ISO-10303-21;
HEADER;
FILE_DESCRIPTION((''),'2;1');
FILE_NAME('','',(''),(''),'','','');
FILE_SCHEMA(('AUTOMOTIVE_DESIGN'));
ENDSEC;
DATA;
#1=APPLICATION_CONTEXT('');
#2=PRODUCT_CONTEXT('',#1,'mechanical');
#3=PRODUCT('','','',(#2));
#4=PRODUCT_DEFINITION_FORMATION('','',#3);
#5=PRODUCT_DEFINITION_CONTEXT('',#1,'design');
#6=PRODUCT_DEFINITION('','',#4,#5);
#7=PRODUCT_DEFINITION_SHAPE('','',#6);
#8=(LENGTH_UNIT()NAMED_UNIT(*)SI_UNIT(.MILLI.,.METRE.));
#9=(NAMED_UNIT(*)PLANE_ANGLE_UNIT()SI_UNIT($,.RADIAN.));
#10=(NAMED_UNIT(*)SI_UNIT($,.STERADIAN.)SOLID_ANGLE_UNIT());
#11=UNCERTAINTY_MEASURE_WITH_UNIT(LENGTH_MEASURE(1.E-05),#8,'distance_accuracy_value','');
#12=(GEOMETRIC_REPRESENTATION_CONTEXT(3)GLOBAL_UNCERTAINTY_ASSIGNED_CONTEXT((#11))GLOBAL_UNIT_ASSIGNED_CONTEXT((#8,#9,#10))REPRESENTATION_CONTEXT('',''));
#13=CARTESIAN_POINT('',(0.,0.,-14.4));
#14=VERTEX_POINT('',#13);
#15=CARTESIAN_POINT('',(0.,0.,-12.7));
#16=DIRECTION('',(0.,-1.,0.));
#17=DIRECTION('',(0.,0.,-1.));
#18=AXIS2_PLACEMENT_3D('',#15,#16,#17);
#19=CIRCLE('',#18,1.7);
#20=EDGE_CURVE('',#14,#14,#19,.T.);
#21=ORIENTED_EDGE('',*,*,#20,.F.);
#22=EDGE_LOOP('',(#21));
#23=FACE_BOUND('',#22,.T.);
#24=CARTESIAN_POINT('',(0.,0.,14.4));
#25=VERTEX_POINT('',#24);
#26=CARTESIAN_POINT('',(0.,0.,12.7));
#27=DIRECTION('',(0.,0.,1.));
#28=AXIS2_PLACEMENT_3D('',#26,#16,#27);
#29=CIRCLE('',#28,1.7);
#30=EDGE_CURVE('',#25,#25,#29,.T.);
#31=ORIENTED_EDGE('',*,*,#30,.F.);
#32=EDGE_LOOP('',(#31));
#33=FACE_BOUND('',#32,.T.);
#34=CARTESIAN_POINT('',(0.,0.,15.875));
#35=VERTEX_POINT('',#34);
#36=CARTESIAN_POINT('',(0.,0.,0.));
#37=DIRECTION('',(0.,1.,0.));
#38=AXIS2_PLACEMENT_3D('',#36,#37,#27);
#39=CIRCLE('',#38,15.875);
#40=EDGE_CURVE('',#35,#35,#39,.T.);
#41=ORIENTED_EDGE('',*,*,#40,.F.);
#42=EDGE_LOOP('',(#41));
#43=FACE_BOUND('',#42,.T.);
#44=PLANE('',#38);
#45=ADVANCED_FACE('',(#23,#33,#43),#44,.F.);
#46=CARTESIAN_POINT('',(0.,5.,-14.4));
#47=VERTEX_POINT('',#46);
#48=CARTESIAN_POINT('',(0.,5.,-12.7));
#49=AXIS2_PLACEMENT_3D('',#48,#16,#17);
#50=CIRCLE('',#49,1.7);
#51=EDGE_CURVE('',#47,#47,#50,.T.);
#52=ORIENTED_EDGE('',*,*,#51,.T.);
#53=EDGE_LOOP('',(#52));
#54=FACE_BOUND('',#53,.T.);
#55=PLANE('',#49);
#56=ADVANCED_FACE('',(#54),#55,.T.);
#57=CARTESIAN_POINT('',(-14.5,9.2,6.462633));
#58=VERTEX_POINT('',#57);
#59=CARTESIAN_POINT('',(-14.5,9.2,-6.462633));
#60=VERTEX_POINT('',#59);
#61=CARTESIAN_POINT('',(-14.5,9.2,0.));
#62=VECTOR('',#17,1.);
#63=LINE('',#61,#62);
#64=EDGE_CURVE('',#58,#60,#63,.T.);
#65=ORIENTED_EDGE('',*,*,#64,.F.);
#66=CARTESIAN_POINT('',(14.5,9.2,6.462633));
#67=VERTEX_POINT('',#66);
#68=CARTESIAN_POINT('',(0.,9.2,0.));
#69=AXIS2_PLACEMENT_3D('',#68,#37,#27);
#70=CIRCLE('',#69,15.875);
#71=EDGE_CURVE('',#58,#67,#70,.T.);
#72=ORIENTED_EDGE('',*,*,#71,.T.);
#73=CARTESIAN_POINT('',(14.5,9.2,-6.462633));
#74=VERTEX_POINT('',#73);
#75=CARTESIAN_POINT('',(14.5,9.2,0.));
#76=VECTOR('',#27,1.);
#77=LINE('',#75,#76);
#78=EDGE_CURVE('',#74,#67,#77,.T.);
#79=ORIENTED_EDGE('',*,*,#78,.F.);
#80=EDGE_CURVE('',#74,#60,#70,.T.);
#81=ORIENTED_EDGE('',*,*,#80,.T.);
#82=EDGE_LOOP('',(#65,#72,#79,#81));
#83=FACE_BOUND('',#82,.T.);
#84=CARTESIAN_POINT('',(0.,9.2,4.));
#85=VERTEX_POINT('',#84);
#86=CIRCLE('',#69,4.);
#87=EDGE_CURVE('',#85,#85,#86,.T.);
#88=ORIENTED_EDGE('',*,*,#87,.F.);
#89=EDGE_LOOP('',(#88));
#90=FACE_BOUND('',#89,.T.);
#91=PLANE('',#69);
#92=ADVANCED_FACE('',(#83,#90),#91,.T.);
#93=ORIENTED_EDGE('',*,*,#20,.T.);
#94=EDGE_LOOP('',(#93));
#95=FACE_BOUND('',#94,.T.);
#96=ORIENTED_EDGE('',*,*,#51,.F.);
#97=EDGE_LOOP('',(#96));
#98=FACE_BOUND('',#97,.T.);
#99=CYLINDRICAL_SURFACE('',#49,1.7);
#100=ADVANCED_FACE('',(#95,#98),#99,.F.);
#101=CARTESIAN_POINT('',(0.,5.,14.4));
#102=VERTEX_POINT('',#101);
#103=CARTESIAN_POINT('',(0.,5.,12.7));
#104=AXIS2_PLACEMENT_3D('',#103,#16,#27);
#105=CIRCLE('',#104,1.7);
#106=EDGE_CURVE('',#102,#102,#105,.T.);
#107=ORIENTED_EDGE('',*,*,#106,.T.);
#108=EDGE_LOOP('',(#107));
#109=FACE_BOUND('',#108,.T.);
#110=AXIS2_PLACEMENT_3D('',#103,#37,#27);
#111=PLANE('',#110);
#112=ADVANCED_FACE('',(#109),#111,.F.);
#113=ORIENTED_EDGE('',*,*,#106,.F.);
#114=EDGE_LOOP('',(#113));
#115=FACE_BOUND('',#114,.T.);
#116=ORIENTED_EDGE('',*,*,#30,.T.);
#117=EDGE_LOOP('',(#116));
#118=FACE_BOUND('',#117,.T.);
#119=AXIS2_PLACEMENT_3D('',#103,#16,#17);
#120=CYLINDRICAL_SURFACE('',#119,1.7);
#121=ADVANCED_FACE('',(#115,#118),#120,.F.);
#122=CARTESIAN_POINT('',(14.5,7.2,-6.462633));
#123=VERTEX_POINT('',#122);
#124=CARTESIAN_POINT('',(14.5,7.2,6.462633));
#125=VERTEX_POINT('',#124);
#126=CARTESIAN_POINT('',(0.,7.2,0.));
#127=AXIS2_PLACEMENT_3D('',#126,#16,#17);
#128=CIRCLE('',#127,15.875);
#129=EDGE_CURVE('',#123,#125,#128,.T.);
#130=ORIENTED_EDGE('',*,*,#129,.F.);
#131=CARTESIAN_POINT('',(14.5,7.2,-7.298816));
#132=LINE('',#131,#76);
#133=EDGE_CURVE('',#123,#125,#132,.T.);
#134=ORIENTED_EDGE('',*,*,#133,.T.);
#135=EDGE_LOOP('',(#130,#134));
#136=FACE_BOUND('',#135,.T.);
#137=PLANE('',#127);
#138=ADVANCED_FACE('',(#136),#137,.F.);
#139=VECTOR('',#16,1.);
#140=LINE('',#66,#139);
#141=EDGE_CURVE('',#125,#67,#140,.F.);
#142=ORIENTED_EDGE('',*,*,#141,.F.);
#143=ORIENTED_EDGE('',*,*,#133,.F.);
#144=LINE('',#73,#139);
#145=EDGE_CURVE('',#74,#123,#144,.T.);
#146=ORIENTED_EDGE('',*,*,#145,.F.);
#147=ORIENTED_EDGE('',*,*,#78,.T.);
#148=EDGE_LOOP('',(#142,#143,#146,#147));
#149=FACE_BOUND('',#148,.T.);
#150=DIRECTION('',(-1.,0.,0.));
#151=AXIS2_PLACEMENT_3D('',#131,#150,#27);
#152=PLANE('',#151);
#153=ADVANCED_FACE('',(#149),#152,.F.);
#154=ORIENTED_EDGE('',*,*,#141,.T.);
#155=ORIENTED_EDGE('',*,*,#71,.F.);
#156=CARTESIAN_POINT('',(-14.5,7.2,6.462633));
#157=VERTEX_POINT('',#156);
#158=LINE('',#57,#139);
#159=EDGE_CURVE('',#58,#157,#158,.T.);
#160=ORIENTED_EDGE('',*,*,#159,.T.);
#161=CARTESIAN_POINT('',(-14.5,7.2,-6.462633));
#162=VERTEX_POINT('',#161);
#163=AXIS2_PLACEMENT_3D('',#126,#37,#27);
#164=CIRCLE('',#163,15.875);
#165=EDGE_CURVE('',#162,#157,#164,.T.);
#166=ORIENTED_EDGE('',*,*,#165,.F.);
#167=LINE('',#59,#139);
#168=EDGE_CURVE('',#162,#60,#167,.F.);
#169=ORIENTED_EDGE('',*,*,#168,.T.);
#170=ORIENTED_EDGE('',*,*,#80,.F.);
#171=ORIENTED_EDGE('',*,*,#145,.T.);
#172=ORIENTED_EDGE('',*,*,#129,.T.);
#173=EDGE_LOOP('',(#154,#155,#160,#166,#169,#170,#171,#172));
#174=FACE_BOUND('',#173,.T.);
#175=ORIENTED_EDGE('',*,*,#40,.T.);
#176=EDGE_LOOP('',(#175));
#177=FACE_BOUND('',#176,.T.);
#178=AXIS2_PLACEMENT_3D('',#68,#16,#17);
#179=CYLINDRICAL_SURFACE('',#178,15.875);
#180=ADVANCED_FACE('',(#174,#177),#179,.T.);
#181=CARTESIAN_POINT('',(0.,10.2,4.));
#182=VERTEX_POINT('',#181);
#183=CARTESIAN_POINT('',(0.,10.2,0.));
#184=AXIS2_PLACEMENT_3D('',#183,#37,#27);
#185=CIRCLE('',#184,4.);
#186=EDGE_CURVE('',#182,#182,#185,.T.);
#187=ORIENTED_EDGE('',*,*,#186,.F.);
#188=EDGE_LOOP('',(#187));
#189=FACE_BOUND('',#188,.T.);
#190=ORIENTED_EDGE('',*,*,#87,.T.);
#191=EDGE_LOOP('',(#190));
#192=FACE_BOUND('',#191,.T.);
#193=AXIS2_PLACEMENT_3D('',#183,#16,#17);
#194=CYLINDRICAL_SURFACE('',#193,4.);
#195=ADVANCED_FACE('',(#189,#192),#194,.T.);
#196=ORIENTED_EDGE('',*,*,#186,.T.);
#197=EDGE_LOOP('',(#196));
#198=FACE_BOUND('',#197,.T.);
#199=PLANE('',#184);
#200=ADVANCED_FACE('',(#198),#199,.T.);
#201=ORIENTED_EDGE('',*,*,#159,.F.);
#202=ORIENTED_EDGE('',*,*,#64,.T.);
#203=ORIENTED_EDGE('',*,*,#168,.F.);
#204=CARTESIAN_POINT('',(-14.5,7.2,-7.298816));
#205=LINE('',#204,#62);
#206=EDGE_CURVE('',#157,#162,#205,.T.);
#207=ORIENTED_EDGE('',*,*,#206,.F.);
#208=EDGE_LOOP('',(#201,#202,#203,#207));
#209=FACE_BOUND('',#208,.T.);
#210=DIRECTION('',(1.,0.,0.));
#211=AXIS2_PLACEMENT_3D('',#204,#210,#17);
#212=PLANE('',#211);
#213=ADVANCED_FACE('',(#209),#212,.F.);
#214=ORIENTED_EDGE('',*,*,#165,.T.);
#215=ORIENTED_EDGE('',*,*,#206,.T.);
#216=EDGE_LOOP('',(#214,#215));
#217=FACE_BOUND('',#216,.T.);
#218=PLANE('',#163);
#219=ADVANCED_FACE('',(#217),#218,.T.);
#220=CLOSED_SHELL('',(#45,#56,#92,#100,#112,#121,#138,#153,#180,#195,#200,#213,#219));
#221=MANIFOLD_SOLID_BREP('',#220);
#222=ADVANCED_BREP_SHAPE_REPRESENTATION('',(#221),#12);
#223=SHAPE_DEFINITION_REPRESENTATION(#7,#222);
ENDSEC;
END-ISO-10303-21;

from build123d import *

# Parameters (mm, degrees)
SKETCH1_R               = 15.875
BOSS_EXTRUDE1_DEPTH     = 9.2
SKETCH2_W               = 2.259426776
SKETCH2_H               = 16.292984729
SKETCH2_W_2             = 2.453909841
SKETCH2_H_2             = 18.61191006
CUT_EXTRUDE2_DEPTH      = 2
SKETCH3_R               = 4
BOSS_EXTRUDE3_DEPTH     = 1
BOSS_EXTRUDE4_START     = -5
BOSS_EXTRUDE4_OUTLINE_R = 1.7
BOSS_EXTRUDE4_DEPTH     = 5


# Read off the part's stored shape, not the designer's step: Boss-Extrude4
with BuildPart() as part:
    # Sketch1 → Boss-Extrude1 (new body)
    with BuildSketch(Plane(origin=(0, 0, 0), x_dir=(1, 0, 0), z_dir=(0, 1, 0))):
        with Locations(Location((0, 0, 0), (0, 0, 270))):
            Circle(SKETCH1_R)
    extrude(amount=BOSS_EXTRUDE1_DEPTH)

    # Sketch2 → Cut-Extrude2 (cut)
    with BuildSketch(Plane(origin=(0, 9.2, 0), x_dir=(1, 0, 0), z_dir=(0, 1, 0))):
        with Locations((-15.629713388, -0.847675915)):
            Rectangle(SKETCH2_W, SKETCH2_H)
        with Locations((15.726954921, -2.007138581)):
            Rectangle(SKETCH2_W_2, SKETCH2_H_2)
    extrude(amount=-CUT_EXTRUDE2_DEPTH, mode=Mode.SUBTRACT)

    # Sketch3 → Boss-Extrude3 (add)
    with BuildSketch(Plane(origin=(0, 9.2, 0), x_dir=(1, 0, 0), z_dir=(0, 1, 0))):
        with Locations(Location((0, 0, 0), (0, 0, 270))):
            Circle(SKETCH3_R)
    extrude(amount=BOSS_EXTRUDE3_DEPTH)

    # Boss-Extrude4 outline → Boss-Extrude4 (cut)
    with BuildSketch(Plane.XZ.offset(BOSS_EXTRUDE4_START)):
        with Locations((0, 12.7)):
            Circle(BOSS_EXTRUDE4_OUTLINE_R)
        with Locations((0, -12.7)):
            Circle(BOSS_EXTRUDE4_OUTLINE_R)
    extrude(amount=BOSS_EXTRUDE4_DEPTH, mode=Mode.SUBTRACT)


solid = part.part
